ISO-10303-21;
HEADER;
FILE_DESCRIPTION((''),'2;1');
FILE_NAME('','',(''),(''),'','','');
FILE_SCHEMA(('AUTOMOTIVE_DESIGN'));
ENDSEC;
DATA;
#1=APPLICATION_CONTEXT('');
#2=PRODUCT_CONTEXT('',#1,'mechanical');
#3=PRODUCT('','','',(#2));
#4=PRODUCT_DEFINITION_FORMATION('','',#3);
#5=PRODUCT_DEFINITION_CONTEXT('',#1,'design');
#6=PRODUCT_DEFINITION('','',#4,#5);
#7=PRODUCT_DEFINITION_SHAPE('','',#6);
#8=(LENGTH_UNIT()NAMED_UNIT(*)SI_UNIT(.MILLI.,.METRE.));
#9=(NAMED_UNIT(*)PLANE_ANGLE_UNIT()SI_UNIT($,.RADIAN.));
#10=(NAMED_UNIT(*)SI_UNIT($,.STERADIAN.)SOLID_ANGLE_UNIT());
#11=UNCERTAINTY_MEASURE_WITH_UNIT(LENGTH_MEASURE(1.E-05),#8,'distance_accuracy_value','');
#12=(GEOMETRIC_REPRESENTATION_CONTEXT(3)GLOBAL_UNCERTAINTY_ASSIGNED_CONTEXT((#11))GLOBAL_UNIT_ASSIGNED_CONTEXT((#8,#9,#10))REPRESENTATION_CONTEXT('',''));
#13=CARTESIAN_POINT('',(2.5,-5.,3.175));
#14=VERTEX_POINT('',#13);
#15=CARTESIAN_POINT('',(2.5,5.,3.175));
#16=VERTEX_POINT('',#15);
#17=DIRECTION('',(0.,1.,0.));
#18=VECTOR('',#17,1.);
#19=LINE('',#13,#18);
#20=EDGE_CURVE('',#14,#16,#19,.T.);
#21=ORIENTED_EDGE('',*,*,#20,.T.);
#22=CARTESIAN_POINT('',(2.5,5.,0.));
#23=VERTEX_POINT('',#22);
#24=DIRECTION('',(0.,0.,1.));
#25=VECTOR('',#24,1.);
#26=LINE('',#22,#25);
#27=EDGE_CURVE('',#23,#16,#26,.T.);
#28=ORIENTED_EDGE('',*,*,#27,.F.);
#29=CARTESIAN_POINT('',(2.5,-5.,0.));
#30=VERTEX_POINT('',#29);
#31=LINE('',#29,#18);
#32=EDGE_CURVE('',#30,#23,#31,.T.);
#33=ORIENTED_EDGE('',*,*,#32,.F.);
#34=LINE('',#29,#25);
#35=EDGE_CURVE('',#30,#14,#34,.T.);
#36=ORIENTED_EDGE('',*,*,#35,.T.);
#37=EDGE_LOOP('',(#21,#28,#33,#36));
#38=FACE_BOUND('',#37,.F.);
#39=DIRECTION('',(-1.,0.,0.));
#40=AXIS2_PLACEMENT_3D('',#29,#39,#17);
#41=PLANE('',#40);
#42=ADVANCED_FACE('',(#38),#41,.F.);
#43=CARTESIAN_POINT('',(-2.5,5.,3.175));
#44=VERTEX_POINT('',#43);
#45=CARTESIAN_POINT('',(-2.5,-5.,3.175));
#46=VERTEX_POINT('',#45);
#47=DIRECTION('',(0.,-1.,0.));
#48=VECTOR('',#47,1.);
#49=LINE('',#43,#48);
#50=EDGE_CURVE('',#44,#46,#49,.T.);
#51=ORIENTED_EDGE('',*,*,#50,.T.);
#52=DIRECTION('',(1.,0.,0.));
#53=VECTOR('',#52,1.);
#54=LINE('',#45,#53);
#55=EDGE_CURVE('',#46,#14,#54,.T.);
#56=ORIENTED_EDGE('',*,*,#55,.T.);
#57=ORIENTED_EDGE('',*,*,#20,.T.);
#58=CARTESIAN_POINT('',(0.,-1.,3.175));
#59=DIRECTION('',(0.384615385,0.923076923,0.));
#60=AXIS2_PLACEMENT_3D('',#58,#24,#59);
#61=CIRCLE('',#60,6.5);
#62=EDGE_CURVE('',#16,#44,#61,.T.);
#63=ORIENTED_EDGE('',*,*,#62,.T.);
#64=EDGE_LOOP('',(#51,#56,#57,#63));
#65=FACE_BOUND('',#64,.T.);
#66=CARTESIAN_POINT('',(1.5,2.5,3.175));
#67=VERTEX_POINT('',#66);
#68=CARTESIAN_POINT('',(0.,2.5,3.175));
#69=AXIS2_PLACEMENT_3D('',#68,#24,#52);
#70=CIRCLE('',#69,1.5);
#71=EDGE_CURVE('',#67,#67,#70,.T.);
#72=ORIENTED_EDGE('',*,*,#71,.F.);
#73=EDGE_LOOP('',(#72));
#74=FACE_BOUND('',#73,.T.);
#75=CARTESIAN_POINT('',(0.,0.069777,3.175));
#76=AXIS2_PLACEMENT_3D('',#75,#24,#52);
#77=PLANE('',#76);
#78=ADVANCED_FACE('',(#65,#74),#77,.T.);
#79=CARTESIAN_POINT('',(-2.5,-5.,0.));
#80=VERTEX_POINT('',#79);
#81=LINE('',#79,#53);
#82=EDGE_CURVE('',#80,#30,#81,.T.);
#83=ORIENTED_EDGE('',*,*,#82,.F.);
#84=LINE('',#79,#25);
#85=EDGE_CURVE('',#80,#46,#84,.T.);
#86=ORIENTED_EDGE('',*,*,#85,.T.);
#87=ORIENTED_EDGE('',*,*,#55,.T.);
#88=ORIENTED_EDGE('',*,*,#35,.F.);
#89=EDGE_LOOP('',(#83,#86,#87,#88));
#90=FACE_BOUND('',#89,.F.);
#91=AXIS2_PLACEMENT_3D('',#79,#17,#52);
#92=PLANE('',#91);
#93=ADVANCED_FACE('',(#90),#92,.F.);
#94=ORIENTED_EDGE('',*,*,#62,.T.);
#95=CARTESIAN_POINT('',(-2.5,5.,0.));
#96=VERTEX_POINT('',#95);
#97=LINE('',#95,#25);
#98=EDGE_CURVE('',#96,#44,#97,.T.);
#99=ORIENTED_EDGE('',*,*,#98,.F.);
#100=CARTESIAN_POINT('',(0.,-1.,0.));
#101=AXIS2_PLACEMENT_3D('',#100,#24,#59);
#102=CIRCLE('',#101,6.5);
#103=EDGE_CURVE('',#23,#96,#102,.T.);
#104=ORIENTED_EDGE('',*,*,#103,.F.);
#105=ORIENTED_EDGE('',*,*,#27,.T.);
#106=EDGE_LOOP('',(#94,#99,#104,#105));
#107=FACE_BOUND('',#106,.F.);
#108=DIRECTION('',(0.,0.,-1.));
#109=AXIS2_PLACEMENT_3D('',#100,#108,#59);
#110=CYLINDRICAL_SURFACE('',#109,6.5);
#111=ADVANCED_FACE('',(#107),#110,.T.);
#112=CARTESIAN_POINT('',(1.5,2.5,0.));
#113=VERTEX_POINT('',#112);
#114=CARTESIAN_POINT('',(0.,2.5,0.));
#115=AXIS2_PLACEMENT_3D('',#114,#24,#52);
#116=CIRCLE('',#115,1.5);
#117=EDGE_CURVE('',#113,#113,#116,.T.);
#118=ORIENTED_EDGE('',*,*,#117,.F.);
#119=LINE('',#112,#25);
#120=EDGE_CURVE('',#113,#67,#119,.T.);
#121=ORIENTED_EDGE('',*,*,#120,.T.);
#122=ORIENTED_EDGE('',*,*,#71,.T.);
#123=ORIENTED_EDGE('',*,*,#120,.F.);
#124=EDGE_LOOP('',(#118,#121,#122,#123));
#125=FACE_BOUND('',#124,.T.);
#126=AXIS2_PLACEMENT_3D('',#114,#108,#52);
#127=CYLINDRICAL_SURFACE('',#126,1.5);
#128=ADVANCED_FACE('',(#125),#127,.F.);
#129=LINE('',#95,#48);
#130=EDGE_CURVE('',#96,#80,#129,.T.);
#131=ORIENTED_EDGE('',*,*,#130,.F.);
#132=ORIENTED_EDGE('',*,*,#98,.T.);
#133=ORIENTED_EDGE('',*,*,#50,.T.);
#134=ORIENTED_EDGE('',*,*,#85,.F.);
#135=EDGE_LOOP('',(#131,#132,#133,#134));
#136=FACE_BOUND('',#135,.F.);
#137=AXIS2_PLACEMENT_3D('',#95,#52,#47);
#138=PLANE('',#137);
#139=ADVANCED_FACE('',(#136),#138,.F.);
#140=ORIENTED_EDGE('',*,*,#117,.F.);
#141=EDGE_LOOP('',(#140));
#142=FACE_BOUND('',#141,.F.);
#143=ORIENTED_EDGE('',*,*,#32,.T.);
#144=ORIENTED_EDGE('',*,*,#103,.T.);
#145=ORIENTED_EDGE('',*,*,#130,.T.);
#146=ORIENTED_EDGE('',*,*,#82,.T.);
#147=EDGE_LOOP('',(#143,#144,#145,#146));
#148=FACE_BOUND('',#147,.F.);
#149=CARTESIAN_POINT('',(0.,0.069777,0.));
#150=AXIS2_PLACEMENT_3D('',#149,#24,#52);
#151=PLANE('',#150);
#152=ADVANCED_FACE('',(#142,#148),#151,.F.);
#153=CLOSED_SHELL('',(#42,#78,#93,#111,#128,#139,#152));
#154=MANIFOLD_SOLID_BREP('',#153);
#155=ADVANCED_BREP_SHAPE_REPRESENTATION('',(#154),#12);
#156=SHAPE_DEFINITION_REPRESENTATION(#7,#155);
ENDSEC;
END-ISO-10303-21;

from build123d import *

# Parameters (mm, degrees)
F0_R     = 1.5
F1_DEPTH = 3.175


# Not quite as in the source:
# - a length typed as a fraction of an inch, garbled in the dataset ("3 / 203.2 mm" for 3/8 in), is restored


with BuildPart() as f1:
    # F0 (on Top) → F1 (new body)
    with BuildSketch(Plane.XY):
        with BuildLine():
            Line((-2.5, -5), (2.5, -5))
            Line((2.5, -5), (2.5, 5))
            ThreePointArc((2.5, 5), (0, 5.5), (-2.5, 5))
            Line((-2.5, 5), (-2.5, -5))
        make_face()
        with Locations((0, 2.5)):
            Circle(F0_R, mode=Mode.SUBTRACT)
    extrude(amount=F1_DEPTH)


solid = f1.part
